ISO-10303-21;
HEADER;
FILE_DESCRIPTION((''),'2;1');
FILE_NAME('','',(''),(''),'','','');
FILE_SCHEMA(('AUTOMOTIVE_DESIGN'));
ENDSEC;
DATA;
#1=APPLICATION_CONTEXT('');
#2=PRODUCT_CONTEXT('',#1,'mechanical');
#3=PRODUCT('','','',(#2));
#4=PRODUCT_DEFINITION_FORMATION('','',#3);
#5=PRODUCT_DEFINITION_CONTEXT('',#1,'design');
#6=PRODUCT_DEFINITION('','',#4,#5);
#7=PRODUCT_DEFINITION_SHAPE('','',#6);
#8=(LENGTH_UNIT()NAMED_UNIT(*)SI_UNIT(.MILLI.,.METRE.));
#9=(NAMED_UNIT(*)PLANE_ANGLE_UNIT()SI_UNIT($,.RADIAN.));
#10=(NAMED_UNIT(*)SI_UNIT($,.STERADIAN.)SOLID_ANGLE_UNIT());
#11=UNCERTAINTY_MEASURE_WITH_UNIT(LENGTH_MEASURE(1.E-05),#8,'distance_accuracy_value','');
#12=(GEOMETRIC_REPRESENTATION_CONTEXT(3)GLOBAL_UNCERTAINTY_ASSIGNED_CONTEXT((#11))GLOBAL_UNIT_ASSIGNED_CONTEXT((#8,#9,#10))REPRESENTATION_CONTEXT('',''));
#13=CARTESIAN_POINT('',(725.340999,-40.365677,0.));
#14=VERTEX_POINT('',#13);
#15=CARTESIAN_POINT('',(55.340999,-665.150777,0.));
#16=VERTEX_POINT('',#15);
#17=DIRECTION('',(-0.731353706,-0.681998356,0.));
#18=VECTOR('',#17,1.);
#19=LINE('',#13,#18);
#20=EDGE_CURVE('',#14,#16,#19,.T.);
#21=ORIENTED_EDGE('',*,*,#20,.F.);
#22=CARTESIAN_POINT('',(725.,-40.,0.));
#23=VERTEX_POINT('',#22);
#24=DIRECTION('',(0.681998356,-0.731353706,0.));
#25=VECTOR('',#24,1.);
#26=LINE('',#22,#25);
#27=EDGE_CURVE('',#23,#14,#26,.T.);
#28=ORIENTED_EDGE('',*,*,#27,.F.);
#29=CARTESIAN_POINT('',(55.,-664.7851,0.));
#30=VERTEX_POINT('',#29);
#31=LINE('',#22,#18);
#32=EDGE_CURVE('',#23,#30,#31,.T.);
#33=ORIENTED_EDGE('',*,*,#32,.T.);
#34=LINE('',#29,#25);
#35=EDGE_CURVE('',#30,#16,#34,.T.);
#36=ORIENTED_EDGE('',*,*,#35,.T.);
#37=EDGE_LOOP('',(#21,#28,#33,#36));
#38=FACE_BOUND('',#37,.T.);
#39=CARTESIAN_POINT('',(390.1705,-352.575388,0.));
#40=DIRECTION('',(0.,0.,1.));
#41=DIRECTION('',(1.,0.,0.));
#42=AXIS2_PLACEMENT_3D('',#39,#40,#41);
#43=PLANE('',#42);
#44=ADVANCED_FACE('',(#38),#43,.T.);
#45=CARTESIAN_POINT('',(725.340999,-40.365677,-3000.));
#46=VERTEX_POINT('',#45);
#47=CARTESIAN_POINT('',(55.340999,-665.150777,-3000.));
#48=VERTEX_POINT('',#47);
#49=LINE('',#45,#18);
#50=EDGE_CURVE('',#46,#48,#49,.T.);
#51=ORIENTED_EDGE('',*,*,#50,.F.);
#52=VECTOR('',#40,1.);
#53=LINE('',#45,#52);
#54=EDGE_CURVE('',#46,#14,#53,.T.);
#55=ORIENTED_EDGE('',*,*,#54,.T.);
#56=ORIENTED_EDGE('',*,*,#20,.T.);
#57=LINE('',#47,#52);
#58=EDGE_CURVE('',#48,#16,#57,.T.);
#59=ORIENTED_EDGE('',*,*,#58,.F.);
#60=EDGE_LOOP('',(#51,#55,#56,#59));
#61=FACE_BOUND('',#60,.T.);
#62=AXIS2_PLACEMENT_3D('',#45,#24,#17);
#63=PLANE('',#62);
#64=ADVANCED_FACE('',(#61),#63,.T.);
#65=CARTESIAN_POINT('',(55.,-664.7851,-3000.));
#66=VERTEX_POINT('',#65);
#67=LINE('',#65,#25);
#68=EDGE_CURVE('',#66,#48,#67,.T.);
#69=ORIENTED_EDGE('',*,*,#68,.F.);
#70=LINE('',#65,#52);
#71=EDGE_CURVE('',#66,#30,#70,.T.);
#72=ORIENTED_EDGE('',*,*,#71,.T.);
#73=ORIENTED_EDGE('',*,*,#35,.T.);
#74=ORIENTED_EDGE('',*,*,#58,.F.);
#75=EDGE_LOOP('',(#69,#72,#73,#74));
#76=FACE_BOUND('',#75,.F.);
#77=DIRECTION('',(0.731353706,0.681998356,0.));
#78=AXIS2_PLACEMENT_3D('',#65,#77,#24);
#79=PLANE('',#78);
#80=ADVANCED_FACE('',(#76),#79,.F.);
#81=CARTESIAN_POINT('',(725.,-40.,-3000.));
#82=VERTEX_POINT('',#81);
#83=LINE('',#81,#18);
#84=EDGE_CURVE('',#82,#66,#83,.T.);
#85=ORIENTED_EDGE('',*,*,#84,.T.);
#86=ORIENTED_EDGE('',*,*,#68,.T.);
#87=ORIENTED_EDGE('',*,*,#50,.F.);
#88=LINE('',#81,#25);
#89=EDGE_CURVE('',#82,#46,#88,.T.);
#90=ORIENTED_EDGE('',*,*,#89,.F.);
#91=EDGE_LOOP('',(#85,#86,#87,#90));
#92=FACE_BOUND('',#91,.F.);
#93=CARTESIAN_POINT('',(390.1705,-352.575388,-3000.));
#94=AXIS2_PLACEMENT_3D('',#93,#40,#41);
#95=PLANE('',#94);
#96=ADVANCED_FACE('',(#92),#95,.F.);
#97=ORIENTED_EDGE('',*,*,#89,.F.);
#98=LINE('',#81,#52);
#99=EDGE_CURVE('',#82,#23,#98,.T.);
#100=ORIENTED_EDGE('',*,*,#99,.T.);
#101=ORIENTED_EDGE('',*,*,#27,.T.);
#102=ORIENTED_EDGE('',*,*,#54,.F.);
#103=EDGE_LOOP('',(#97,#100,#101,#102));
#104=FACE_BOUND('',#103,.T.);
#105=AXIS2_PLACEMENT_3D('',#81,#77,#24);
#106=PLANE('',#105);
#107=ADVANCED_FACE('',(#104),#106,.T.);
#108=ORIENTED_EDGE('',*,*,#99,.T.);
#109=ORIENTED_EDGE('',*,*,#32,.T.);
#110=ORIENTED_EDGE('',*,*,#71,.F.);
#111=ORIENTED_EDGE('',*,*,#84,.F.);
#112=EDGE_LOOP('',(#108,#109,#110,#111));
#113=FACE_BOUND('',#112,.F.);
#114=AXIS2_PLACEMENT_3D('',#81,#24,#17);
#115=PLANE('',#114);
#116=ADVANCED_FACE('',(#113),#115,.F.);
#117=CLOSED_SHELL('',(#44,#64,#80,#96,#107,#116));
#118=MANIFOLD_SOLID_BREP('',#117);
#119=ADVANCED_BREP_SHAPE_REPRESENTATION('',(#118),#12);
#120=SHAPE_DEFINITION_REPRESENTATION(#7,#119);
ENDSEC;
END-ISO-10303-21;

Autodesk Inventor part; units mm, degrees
ref_plane "YZ Plane" through (0, 0, 0) normal (1, 0, 0) x (0, 1, 0)
ref_plane "XZ Plane" through (0, 0, 0) normal (0, 1, 0) x (-1, 0, 0)
ref_plane "XY Plane" through (0, 0, 0) normal (0, 0, 1) x (1, 0, 0)
sketch "Sketch1" plane through (0, 0, 0) normal (0, 0, 1) x (1, 0, 0)
  line L0 (-750, 0) -> (750, 0) construction
  line L1 (750, 0) -> (750, -2100) construction
  line L2 (750, -2100) -> (110, -2700) construction
  line L3 (110, -2700) -> (-110, -2700) construction
  line L4 (-110, -2700) -> (-750, -2100) construction
  line L5 (-750, -2100) -> (-750, 0) construction
  line L6 (-725, -40) -> (725, -40) construction
  line L7 (-725, -2089.1692) -> (-100.1138, -2675) construction
  line L8 (-100.1138, -2675) -> (100.1138, -2675) construction
  line L9 (100.1138, -2675) -> (725, -2089.1692) construction
  line L10 (0, -2700) -> (0, 0) construction
  line L11 (55, -2700) -> (55, 0) construction
  line L12 (-55, -2700) -> (-55, 0) construction
  line L13 (725, -2089.1692) -> (725, -40) construction
  line L14 (-725, -40) -> (-725, -2089.1692) construction
  line L15 (725, -40) -> (55, -664.7851)
  point P0 (0, -40)
  dimension "d0" = 1500
  dimension "d2" = 220
  dimension "d3" = 600
  dimension "d5" = 2700
  dimension "d7" = 40
  dimension "d10" = 1450
  dimension "d11" = 25
  dimension "d13" = 55
  dimension "d14" = 55
  dimension "d16" = 133
contour flange "Contour Flange1" sketch "Sketch1" thickness 0.5 bend radius 0.5 width 3000 along (0, 0, -1) mid plane no both sides no wall seen from (390, -352.3926, 0) lies toward (0.6819984, -0.7313537, 0) curves L15
bend "Bend1"
corner "Corner1"
sketch "Sketch2" plane through (0, 0, 0) normal (0, 0, 1) x (1, 0, 0)
  line L0 (725, -14.0576) -> (725, -711.6361)
  line L1 (725, -711.6361) -> (51.2725, -1339.8971)
  line L2 (725, -40) -> (55, -664.7851) projected
  line L3 (51.2725, -1339.8971) -> (28.6081, -664.7851)
  line L4 (28.6081, -664.7851) -> (725, -15.3891)
  line L5 (725, -102) -> (764.4623, -102)
  line L6 (725, -619.8366) -> (764.4623, -619.8366)
  line L7 (764.4623, -619.8366) -> (764.4623, -664.7851)
  line L8 (764.4623, -102) -> (764.4623, -145.6915)
  line L9 (756.8069, -136.967) -> (756.8069, -162.3163)
  line L10 (756.8069, -162.3163) -> (780.2062, -162.3163)
  line L11 (754.6633, -650.9815) -> (754.6633, -683.9746)
  line L12 (754.6633, -683.9746) -> (788.2377, -683.9746)
  point P0 (0, 0)
equation "\"d14\" = d13"
equation "\"d17\" = Thickness"
equation "\"d18\" = BendReliefWidth"
equation "\"d19\" = BendReliefDepth"
equation "\"d20\" = MinimumRemnant"
equation "\"d21\" = TransitionRadius"
equation "\"d23\" = BendRadius"
equation "\"d25\" = CornerReliefSize"
equation "\"d26\" = GapSize"
equation "\"d27\" = JacobiRadiusSize"
equation "\"BendRadius\" = Thickness"
equation "\"BendReliefWidth\" = Thickness"
equation "\"BendReliefDepth\" = 0.5 * Thickness"
equation "\"CornerReliefSize\" = 4 * Thickness"
equation "\"MinimumRemnant\" = 2 * Thickness"
equation "\"TransitionRadius\" = BendRadius"
equation "\"JacobiRadiusSize\" = BendRadius"
equation "\"GapSize\" = Thickness"
equation "\"Thickness\" = 0.5"
properties part number "MSC 0101 sheet gills" material "Stainless Steel"
